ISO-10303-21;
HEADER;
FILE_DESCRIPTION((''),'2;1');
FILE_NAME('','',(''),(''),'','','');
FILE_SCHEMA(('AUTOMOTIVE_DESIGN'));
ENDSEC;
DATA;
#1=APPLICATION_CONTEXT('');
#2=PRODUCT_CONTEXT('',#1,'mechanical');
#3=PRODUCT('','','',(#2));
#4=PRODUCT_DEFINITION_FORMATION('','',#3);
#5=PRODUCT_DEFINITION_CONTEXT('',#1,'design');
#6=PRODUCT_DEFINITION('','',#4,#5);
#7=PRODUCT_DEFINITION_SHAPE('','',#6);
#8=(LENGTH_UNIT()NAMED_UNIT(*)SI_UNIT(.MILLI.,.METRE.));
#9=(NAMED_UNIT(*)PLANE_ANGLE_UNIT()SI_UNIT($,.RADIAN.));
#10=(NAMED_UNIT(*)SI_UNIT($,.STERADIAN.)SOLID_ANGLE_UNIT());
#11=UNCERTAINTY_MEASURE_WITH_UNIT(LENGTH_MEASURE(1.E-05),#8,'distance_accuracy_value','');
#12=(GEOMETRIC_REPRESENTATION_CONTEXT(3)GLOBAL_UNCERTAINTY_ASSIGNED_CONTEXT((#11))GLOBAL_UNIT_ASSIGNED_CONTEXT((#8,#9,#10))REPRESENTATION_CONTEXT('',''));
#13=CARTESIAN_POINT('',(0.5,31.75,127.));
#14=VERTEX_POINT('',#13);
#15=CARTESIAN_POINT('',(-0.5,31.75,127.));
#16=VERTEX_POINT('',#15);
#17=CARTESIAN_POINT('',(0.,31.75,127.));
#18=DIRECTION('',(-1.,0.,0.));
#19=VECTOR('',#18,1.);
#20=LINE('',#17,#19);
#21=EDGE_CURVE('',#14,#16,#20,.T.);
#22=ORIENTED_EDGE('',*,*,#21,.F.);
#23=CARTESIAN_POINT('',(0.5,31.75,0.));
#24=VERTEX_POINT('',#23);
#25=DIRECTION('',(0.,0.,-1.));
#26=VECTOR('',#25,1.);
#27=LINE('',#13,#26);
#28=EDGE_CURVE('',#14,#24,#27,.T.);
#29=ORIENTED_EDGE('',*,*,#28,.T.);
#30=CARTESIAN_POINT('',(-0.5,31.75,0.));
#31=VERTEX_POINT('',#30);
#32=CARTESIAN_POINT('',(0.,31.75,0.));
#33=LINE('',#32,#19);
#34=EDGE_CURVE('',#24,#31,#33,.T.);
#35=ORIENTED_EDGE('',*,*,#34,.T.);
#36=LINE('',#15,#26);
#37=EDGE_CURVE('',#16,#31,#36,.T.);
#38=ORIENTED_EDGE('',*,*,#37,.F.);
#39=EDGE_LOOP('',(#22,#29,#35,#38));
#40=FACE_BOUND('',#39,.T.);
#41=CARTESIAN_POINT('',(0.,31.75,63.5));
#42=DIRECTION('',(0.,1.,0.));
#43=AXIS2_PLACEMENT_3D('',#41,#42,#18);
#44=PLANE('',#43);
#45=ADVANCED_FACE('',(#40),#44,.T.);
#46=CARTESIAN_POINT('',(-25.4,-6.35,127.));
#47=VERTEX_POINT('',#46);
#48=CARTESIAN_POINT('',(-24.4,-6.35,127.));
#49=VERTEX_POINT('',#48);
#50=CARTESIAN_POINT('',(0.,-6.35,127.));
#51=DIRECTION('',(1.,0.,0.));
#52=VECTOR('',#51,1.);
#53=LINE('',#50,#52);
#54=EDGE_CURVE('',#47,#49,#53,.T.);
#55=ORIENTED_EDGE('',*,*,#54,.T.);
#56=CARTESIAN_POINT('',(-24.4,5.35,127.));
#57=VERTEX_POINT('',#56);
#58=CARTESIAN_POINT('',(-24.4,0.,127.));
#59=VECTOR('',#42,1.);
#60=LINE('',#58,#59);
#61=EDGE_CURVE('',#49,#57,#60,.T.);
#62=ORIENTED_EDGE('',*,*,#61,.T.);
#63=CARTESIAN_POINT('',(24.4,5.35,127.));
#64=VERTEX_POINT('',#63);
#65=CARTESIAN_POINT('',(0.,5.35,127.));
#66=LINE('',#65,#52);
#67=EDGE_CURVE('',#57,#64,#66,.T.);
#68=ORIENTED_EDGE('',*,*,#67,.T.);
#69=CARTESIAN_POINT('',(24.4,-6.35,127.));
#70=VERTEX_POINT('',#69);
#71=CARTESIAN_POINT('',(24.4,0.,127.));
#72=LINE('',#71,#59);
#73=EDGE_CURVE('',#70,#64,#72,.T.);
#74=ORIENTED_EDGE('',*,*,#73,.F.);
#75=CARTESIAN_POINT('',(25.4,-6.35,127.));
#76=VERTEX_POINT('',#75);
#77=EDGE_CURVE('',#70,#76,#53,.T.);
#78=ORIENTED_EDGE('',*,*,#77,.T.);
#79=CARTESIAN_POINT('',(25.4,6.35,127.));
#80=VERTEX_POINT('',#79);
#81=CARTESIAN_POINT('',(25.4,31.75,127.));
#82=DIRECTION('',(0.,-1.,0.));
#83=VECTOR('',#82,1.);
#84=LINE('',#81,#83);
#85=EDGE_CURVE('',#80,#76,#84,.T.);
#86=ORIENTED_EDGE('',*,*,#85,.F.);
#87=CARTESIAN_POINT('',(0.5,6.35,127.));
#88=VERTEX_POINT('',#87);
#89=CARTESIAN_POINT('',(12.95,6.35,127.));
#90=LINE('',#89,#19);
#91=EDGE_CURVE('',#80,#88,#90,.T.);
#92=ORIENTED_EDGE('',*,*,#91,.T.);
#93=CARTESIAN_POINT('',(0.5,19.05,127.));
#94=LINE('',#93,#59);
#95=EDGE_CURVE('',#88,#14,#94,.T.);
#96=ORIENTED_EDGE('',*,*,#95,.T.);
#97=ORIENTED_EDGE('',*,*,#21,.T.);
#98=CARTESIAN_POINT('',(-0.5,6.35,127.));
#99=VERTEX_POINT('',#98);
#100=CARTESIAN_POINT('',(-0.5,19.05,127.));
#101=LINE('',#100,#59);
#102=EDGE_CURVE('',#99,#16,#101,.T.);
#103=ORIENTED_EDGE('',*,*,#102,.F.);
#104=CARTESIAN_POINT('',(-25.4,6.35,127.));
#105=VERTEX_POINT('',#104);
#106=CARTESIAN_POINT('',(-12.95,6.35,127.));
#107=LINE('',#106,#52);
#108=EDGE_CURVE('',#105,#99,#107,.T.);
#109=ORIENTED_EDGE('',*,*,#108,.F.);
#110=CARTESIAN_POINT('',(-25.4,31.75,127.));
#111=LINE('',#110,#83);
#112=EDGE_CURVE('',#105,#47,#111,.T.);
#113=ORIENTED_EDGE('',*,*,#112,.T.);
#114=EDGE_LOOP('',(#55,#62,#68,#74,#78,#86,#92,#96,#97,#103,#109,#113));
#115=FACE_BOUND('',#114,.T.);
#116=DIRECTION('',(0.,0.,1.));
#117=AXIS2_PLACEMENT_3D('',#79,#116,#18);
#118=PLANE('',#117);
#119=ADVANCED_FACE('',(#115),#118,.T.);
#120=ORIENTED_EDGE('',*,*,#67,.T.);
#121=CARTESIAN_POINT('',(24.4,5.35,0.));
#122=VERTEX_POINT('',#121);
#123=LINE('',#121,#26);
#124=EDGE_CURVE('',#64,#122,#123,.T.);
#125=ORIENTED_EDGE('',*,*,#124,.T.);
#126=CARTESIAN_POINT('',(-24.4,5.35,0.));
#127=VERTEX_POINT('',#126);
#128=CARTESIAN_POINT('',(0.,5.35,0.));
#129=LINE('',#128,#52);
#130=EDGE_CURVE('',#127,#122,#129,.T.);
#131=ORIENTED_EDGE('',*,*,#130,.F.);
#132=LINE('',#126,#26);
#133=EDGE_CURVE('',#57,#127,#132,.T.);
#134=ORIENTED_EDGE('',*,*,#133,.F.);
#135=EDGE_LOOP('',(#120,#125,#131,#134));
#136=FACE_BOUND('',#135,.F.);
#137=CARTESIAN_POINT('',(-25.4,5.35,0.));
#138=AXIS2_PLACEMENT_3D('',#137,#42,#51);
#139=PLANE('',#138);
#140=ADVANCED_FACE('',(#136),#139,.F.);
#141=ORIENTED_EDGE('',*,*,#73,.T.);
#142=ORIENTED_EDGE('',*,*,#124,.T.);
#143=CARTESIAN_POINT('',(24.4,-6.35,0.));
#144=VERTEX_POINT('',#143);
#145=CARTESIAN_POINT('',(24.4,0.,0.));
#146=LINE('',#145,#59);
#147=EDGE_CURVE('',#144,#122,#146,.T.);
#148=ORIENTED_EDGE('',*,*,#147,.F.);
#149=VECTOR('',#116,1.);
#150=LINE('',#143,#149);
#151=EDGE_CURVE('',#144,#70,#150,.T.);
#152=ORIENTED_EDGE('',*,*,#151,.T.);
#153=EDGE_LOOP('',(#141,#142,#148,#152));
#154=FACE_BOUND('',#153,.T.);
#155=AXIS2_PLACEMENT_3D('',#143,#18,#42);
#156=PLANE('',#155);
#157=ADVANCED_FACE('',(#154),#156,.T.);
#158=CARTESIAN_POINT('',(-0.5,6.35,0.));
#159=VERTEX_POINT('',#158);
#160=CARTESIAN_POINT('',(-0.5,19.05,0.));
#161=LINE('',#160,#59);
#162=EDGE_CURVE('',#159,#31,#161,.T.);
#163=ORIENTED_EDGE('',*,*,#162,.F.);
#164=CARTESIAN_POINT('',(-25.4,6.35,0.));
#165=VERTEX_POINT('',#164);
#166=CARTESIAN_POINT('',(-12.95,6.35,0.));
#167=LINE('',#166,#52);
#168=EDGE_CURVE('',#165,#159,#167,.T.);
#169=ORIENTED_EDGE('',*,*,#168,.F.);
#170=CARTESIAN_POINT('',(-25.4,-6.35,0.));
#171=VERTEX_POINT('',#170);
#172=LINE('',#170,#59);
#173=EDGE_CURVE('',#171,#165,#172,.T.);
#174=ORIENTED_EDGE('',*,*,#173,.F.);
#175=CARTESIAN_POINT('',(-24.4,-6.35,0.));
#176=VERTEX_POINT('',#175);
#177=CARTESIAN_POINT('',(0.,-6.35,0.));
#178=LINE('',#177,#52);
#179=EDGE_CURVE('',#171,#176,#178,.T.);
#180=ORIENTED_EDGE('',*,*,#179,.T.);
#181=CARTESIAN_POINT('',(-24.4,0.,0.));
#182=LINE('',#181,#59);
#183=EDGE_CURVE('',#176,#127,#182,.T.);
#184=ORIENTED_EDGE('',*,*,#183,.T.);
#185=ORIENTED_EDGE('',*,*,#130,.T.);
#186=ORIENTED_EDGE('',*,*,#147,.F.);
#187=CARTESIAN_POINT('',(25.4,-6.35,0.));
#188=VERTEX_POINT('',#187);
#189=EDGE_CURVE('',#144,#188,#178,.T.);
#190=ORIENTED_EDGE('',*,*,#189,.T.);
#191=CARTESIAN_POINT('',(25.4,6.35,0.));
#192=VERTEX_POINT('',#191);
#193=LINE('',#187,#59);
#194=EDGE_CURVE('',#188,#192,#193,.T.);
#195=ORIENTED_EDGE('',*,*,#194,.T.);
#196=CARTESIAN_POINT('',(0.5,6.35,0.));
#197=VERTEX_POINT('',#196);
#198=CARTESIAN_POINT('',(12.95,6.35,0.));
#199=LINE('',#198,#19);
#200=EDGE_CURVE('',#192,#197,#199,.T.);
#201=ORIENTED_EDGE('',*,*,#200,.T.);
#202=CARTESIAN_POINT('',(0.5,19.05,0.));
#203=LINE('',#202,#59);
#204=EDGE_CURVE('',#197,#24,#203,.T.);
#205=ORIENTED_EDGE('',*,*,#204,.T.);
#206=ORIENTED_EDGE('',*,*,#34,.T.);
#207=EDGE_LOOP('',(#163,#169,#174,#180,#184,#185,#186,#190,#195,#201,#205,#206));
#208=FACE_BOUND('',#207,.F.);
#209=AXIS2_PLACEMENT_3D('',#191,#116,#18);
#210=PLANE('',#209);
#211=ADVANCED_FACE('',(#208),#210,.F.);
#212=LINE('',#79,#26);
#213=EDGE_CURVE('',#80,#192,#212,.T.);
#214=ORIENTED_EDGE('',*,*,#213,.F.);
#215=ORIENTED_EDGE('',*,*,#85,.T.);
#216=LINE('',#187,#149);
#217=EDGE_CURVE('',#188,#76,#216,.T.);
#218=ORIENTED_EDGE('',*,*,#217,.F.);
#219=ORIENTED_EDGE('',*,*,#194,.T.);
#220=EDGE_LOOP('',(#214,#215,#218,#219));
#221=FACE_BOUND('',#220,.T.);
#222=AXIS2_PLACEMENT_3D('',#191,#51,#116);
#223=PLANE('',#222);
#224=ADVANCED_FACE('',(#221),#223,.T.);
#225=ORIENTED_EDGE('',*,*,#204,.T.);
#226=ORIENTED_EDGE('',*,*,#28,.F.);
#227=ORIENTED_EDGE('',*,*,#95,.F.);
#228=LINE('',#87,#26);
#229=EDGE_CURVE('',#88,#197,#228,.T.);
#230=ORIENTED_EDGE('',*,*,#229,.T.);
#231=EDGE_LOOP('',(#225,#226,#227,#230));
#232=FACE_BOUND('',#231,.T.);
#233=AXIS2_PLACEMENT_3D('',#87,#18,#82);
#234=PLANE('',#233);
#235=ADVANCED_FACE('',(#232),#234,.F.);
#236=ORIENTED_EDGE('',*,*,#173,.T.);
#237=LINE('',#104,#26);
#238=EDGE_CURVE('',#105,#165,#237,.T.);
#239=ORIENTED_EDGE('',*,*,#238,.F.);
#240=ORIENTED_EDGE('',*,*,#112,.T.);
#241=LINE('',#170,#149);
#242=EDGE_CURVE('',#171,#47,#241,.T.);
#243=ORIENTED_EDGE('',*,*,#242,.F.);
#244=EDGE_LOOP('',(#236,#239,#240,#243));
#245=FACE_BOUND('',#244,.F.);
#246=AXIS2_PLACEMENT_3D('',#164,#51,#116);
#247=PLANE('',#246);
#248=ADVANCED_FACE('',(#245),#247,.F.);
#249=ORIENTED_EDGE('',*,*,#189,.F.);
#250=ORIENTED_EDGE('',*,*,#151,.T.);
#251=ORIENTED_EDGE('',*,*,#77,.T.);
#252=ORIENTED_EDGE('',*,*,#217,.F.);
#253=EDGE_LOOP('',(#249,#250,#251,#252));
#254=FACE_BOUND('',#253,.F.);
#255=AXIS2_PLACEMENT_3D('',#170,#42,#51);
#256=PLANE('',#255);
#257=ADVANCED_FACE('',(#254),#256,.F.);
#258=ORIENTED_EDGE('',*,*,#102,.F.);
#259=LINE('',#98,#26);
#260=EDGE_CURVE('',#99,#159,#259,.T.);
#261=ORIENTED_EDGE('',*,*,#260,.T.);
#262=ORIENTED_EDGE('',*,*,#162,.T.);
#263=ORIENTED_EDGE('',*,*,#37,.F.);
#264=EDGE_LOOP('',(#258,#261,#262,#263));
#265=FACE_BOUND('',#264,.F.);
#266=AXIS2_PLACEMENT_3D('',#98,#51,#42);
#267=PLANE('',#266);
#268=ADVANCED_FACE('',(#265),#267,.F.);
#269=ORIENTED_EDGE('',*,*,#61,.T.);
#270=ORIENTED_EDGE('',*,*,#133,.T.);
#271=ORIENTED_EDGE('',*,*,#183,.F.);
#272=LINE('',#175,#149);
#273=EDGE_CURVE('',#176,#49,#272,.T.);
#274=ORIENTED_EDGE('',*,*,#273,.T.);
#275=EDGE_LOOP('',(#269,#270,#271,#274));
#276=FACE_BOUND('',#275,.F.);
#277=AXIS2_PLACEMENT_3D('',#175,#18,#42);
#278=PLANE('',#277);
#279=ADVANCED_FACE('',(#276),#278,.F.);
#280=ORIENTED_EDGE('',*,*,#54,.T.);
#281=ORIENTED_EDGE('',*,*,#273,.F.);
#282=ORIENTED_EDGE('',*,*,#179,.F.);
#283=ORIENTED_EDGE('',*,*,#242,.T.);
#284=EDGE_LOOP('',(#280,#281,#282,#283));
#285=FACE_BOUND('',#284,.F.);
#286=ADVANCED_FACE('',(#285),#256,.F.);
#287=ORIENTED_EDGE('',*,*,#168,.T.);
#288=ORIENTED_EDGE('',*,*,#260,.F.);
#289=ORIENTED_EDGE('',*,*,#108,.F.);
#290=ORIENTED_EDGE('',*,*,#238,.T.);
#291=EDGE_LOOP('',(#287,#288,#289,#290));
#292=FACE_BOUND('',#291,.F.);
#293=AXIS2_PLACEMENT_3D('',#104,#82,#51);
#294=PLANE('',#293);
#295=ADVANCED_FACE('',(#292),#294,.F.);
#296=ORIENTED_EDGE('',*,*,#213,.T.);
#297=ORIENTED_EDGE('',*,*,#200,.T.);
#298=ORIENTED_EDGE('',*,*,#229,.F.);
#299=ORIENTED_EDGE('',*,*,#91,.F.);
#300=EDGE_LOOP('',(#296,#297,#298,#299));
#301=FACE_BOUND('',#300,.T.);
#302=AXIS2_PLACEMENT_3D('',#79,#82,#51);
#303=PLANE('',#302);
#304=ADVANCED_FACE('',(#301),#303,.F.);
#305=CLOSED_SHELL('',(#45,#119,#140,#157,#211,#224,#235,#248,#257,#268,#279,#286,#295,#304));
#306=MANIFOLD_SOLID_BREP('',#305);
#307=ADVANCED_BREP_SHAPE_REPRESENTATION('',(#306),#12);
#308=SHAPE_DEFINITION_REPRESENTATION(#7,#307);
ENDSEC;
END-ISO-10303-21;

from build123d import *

# Parameters (mm, degrees)
F0_W     = 50.8
F0_H     = 12.7
F1_DEPTH = 127
F2_T     = -1
F3_W     = 50.8
F3_H     = 127
F4_DEPTH = 25.4
F5_W     = 24.9
F5_H     = 25.4
F6_DEPTH = 127


# Not quite as in the source:
# - a pattern or mirror of a feature is missing from the dataset's text; its kind, count and spacing are read off the source's solid


with BuildPart() as f1:
    # F0 (on Top) → F1 (new body)
    with BuildSketch(Plane.XY):
        Rectangle(F0_W, F0_H)
    extrude(amount=F1_DEPTH)

    # F2
    f2_openings = [f1.faces().sort_by_distance(p)[0] for p in [
        (0, 0, 127),
        (0, -6.35, 63.5),
        (0, 0, 0),
    ]]
    offset(amount=F2_T, openings=f2_openings)

    # F3 (on face) → F4 (join)
    with BuildSketch(Plane(origin=(0, 6.35, 0), x_dir=(-1, 0, 0), z_dir=(0, 1, 0))):
        with Locations((0, 63.5)):
            Rectangle(F3_W, F3_H)
    extrude(amount=F4_DEPTH)

    # F5 (on face) → F6 (cut)
    with BuildSketch(Plane.XY.offset(127)):
        with Locations((-12.95, 19.05)):
            Rectangle(F5_W, F5_H)
    f6 = extrude(amount=-F6_DEPTH, mode=Mode.SUBTRACT)

    # F6_copies: F6 across plane
    add(f6.mirror(Plane(origin=(0, 0, 0), x_dir=(0, 0, 1), z_dir=(1, 0, 0))), mode=Mode.SUBTRACT)


solid = f1.part
